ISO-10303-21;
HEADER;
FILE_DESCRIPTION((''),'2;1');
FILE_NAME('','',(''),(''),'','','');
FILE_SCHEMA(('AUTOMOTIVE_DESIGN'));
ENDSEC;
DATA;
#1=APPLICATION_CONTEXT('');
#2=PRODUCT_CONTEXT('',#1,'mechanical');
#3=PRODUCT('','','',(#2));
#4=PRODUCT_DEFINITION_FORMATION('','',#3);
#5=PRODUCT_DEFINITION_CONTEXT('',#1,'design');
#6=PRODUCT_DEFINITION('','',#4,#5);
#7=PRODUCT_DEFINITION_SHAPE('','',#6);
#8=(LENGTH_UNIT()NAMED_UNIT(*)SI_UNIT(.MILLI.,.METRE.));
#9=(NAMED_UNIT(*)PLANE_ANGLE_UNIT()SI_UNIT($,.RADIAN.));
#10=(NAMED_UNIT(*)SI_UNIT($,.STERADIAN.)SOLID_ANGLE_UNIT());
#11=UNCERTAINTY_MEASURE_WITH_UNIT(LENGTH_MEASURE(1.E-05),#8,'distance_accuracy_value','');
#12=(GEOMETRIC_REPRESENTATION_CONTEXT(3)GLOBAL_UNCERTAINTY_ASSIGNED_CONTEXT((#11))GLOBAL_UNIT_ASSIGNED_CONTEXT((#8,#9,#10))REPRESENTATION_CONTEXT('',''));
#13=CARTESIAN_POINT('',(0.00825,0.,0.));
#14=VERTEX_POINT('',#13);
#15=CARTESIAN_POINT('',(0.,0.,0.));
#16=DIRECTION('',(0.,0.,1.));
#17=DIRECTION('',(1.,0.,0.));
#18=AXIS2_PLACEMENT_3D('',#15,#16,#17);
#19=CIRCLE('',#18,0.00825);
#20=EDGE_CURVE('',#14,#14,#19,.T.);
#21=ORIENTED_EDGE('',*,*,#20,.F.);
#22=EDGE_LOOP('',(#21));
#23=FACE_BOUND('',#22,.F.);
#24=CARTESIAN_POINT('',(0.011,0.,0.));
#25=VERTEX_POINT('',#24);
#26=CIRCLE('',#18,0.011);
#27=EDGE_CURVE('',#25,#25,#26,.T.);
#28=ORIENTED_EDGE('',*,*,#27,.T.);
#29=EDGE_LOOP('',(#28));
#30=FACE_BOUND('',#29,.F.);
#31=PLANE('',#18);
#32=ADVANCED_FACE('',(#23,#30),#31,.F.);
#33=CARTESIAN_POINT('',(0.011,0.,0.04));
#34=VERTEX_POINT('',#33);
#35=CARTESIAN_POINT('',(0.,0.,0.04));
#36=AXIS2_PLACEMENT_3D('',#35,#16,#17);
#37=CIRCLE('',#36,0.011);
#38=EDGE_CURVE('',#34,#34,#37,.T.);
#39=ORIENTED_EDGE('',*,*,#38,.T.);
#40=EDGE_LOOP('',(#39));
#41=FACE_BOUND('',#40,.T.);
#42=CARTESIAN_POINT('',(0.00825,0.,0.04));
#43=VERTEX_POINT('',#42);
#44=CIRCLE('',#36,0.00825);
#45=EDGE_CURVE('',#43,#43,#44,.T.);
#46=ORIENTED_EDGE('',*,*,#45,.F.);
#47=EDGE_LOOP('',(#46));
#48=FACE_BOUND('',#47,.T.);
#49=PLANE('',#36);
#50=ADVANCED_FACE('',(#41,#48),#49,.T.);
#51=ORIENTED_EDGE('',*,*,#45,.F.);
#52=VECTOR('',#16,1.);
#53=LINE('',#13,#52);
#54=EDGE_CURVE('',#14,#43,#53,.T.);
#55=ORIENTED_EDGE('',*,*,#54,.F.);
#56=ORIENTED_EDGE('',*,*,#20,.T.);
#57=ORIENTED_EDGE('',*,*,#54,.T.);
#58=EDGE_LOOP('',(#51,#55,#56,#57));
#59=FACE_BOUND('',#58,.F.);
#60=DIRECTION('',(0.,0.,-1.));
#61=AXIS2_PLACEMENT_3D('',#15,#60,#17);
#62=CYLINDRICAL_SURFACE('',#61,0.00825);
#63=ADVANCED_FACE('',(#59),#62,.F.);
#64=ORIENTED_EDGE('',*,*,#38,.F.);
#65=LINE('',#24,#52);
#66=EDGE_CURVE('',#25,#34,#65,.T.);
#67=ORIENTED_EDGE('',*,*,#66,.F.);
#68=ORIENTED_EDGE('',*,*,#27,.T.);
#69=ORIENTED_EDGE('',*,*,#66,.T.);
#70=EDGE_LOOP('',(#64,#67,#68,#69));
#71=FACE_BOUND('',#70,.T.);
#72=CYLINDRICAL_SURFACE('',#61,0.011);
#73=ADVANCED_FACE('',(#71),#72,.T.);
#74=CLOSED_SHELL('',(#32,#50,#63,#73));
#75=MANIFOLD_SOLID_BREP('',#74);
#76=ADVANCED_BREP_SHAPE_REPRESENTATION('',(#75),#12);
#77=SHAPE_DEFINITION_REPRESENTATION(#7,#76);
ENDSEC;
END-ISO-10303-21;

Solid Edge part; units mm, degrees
sketch "Sketch1" plane through (0, 0, 0) normal (0, 0, 1) x (1, 0, 0)
  circle A0 centre (0, 0) radius 0.011
  circle A1 centre (0, 0) radius 0.00825
  dimension "D1" = 0.0165
  dimension "D2" = 0.022
extrude "Protrusion1" add sketch "Sketch1" along normal blind 0.04
